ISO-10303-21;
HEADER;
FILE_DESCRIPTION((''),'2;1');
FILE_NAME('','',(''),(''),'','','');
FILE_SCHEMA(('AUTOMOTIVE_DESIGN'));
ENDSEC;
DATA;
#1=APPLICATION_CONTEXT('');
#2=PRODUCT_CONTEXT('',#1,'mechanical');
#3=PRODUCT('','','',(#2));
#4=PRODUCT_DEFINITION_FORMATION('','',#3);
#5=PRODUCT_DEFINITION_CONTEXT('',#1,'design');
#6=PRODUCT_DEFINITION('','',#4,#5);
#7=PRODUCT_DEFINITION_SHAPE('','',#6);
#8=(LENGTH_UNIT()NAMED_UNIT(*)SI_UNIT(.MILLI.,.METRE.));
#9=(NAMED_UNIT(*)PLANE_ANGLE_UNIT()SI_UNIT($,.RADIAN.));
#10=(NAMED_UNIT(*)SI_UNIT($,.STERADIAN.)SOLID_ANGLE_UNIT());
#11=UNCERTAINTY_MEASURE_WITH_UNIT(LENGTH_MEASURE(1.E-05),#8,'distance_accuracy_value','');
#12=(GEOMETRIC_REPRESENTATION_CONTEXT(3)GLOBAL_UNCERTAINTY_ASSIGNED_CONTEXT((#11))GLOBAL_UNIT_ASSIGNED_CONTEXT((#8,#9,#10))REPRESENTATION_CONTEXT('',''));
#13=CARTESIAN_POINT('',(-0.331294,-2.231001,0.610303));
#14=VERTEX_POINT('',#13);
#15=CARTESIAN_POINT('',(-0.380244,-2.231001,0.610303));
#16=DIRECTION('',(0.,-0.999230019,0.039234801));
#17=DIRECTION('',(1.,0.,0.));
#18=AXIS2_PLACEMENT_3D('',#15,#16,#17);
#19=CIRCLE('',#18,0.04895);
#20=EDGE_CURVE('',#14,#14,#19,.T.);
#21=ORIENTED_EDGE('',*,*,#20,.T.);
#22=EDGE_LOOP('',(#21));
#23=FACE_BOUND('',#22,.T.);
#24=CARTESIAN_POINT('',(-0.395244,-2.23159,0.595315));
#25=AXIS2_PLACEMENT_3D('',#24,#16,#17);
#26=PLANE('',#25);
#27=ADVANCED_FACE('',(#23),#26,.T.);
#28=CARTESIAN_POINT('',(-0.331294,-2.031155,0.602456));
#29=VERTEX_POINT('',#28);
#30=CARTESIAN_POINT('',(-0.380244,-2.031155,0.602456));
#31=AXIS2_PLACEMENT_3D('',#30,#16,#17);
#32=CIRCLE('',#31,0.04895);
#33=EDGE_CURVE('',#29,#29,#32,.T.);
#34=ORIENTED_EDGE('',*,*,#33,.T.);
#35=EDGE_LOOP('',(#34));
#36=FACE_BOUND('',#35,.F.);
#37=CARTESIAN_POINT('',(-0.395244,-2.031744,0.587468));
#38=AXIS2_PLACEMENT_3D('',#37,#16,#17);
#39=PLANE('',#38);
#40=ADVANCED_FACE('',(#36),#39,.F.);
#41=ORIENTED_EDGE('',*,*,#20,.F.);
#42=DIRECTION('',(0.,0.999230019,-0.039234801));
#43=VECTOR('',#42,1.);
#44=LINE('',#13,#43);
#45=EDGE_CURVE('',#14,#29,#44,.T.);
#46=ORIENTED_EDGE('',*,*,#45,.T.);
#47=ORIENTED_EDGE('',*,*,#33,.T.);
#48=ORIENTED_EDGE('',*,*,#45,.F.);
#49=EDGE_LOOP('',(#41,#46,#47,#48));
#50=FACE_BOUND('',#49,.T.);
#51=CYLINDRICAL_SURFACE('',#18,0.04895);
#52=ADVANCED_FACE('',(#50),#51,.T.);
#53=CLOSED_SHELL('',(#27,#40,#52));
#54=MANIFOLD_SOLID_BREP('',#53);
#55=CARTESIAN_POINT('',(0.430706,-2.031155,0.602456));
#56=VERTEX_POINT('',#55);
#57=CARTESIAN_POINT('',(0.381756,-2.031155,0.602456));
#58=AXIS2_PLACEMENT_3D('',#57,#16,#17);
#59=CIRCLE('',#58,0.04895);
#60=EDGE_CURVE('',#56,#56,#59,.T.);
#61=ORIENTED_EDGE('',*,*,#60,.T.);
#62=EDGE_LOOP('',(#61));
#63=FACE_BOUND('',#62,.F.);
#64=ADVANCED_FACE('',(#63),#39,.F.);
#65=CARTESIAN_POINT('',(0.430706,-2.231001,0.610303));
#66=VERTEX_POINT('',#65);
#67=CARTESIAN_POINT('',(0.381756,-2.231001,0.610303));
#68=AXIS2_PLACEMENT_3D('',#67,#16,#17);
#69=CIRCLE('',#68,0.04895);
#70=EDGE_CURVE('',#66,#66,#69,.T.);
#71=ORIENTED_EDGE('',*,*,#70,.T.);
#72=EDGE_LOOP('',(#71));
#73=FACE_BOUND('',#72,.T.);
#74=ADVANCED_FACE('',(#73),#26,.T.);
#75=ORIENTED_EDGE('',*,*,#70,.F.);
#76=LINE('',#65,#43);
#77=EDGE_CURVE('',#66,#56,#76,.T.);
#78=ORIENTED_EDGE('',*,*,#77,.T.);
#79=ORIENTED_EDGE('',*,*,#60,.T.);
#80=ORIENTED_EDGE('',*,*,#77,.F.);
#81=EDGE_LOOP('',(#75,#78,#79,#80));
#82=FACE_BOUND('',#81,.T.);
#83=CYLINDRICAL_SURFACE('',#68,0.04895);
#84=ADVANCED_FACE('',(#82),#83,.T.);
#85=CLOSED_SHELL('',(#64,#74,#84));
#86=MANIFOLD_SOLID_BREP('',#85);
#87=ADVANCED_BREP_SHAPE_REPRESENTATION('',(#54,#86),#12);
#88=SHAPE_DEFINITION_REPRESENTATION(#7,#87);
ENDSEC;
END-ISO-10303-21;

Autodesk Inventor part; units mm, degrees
ref_plane "YZ Plane" through (0, 0, 0) normal (1, 0, 0) x (0, 1, 0)
ref_plane "XZ Plane" through (0, 0, 0) normal (0, 1, 0) x (-1, 0, 0)
ref_plane "XY Plane" through (0, 0, 0) normal (0, 0, 1) x (1, 0, 0)
sketch "Sketch1" plane through (-0.395244, -2.23159, 0.595315) normal (0, -0.99923, 0.0392348) x (1, 0, 0)
  line L0 (0.049998, -0.019223) -> (0.049998, 0.050781)
  line L1 (0.049998, 0.050781) -> (-0.019998, 0.050781)
  line L2 (0.03, 0.03) -> (0, 0.03)
  line L3 (0.03, 0) -> (0.03, 0.03)
  line L4 (0, 0) -> (0.03, 0)
  line L5 (0, 0.03) -> (0, 0)
  line L6 (-0.019998, 0.050781) -> (-0.019998, -0.019223)
  line L7 (-0.019998, -0.019223) -> (0.049998, -0.019223)
  line L8 (0.811998, 0.050781) -> (0.742002, 0.050781)
  line L9 (0.811998, -0.019223) -> (0.811998, 0.050781)
  ellipse E0 centre (0.815195, 0.015) end of major axis (0.815195, 0.051066) minor radius 0.025506
  line L10 (0.792, 0.03) -> (0.792, 0)
  line L11 (0.792, 0.03) -> (0.762, 0.03)
  line L12 (0.742002, 0.050781) -> (0.742002, -0.019223)
  line L13 (0.792, 0) -> (0.762, 0)
  line L14 (0.762, 0) -> (0.762, 0.03)
  line L15 (0.742002, -0.019223) -> (0.811998, -0.019223)
  circle A0 centre (0.777, 0.015) radius 0.04895
  line L16 (0.792, 0.03) -> (0.762, 0)
  line L17 (0.762, 0.03) -> (0.792, 0)
  line L18 (0.03, 0.03) -> (0, 0)
  line L19 (0, 0.03) -> (0.03, 0)
  circle A1 centre (0.015, 0.015) radius 0.04895
  point P0 (0.395244, -0.507301)
sketch "Sketch1 outline for Extrusion1" plane through (-0.395244, -2.23159, 0.595315) normal (0, -0.99923, 0.0392348) x (1, 0, 0)
  circle A0 centre (0.777, 0.015) radius 0.04895
  circle A1 centre (0.015, 0.015) radius 0.04895
extrude "Extrusion1" add sketch "Sketch1 outline for Extrusion1" against normal blind 0.2
properties part number "MQ2_1"
